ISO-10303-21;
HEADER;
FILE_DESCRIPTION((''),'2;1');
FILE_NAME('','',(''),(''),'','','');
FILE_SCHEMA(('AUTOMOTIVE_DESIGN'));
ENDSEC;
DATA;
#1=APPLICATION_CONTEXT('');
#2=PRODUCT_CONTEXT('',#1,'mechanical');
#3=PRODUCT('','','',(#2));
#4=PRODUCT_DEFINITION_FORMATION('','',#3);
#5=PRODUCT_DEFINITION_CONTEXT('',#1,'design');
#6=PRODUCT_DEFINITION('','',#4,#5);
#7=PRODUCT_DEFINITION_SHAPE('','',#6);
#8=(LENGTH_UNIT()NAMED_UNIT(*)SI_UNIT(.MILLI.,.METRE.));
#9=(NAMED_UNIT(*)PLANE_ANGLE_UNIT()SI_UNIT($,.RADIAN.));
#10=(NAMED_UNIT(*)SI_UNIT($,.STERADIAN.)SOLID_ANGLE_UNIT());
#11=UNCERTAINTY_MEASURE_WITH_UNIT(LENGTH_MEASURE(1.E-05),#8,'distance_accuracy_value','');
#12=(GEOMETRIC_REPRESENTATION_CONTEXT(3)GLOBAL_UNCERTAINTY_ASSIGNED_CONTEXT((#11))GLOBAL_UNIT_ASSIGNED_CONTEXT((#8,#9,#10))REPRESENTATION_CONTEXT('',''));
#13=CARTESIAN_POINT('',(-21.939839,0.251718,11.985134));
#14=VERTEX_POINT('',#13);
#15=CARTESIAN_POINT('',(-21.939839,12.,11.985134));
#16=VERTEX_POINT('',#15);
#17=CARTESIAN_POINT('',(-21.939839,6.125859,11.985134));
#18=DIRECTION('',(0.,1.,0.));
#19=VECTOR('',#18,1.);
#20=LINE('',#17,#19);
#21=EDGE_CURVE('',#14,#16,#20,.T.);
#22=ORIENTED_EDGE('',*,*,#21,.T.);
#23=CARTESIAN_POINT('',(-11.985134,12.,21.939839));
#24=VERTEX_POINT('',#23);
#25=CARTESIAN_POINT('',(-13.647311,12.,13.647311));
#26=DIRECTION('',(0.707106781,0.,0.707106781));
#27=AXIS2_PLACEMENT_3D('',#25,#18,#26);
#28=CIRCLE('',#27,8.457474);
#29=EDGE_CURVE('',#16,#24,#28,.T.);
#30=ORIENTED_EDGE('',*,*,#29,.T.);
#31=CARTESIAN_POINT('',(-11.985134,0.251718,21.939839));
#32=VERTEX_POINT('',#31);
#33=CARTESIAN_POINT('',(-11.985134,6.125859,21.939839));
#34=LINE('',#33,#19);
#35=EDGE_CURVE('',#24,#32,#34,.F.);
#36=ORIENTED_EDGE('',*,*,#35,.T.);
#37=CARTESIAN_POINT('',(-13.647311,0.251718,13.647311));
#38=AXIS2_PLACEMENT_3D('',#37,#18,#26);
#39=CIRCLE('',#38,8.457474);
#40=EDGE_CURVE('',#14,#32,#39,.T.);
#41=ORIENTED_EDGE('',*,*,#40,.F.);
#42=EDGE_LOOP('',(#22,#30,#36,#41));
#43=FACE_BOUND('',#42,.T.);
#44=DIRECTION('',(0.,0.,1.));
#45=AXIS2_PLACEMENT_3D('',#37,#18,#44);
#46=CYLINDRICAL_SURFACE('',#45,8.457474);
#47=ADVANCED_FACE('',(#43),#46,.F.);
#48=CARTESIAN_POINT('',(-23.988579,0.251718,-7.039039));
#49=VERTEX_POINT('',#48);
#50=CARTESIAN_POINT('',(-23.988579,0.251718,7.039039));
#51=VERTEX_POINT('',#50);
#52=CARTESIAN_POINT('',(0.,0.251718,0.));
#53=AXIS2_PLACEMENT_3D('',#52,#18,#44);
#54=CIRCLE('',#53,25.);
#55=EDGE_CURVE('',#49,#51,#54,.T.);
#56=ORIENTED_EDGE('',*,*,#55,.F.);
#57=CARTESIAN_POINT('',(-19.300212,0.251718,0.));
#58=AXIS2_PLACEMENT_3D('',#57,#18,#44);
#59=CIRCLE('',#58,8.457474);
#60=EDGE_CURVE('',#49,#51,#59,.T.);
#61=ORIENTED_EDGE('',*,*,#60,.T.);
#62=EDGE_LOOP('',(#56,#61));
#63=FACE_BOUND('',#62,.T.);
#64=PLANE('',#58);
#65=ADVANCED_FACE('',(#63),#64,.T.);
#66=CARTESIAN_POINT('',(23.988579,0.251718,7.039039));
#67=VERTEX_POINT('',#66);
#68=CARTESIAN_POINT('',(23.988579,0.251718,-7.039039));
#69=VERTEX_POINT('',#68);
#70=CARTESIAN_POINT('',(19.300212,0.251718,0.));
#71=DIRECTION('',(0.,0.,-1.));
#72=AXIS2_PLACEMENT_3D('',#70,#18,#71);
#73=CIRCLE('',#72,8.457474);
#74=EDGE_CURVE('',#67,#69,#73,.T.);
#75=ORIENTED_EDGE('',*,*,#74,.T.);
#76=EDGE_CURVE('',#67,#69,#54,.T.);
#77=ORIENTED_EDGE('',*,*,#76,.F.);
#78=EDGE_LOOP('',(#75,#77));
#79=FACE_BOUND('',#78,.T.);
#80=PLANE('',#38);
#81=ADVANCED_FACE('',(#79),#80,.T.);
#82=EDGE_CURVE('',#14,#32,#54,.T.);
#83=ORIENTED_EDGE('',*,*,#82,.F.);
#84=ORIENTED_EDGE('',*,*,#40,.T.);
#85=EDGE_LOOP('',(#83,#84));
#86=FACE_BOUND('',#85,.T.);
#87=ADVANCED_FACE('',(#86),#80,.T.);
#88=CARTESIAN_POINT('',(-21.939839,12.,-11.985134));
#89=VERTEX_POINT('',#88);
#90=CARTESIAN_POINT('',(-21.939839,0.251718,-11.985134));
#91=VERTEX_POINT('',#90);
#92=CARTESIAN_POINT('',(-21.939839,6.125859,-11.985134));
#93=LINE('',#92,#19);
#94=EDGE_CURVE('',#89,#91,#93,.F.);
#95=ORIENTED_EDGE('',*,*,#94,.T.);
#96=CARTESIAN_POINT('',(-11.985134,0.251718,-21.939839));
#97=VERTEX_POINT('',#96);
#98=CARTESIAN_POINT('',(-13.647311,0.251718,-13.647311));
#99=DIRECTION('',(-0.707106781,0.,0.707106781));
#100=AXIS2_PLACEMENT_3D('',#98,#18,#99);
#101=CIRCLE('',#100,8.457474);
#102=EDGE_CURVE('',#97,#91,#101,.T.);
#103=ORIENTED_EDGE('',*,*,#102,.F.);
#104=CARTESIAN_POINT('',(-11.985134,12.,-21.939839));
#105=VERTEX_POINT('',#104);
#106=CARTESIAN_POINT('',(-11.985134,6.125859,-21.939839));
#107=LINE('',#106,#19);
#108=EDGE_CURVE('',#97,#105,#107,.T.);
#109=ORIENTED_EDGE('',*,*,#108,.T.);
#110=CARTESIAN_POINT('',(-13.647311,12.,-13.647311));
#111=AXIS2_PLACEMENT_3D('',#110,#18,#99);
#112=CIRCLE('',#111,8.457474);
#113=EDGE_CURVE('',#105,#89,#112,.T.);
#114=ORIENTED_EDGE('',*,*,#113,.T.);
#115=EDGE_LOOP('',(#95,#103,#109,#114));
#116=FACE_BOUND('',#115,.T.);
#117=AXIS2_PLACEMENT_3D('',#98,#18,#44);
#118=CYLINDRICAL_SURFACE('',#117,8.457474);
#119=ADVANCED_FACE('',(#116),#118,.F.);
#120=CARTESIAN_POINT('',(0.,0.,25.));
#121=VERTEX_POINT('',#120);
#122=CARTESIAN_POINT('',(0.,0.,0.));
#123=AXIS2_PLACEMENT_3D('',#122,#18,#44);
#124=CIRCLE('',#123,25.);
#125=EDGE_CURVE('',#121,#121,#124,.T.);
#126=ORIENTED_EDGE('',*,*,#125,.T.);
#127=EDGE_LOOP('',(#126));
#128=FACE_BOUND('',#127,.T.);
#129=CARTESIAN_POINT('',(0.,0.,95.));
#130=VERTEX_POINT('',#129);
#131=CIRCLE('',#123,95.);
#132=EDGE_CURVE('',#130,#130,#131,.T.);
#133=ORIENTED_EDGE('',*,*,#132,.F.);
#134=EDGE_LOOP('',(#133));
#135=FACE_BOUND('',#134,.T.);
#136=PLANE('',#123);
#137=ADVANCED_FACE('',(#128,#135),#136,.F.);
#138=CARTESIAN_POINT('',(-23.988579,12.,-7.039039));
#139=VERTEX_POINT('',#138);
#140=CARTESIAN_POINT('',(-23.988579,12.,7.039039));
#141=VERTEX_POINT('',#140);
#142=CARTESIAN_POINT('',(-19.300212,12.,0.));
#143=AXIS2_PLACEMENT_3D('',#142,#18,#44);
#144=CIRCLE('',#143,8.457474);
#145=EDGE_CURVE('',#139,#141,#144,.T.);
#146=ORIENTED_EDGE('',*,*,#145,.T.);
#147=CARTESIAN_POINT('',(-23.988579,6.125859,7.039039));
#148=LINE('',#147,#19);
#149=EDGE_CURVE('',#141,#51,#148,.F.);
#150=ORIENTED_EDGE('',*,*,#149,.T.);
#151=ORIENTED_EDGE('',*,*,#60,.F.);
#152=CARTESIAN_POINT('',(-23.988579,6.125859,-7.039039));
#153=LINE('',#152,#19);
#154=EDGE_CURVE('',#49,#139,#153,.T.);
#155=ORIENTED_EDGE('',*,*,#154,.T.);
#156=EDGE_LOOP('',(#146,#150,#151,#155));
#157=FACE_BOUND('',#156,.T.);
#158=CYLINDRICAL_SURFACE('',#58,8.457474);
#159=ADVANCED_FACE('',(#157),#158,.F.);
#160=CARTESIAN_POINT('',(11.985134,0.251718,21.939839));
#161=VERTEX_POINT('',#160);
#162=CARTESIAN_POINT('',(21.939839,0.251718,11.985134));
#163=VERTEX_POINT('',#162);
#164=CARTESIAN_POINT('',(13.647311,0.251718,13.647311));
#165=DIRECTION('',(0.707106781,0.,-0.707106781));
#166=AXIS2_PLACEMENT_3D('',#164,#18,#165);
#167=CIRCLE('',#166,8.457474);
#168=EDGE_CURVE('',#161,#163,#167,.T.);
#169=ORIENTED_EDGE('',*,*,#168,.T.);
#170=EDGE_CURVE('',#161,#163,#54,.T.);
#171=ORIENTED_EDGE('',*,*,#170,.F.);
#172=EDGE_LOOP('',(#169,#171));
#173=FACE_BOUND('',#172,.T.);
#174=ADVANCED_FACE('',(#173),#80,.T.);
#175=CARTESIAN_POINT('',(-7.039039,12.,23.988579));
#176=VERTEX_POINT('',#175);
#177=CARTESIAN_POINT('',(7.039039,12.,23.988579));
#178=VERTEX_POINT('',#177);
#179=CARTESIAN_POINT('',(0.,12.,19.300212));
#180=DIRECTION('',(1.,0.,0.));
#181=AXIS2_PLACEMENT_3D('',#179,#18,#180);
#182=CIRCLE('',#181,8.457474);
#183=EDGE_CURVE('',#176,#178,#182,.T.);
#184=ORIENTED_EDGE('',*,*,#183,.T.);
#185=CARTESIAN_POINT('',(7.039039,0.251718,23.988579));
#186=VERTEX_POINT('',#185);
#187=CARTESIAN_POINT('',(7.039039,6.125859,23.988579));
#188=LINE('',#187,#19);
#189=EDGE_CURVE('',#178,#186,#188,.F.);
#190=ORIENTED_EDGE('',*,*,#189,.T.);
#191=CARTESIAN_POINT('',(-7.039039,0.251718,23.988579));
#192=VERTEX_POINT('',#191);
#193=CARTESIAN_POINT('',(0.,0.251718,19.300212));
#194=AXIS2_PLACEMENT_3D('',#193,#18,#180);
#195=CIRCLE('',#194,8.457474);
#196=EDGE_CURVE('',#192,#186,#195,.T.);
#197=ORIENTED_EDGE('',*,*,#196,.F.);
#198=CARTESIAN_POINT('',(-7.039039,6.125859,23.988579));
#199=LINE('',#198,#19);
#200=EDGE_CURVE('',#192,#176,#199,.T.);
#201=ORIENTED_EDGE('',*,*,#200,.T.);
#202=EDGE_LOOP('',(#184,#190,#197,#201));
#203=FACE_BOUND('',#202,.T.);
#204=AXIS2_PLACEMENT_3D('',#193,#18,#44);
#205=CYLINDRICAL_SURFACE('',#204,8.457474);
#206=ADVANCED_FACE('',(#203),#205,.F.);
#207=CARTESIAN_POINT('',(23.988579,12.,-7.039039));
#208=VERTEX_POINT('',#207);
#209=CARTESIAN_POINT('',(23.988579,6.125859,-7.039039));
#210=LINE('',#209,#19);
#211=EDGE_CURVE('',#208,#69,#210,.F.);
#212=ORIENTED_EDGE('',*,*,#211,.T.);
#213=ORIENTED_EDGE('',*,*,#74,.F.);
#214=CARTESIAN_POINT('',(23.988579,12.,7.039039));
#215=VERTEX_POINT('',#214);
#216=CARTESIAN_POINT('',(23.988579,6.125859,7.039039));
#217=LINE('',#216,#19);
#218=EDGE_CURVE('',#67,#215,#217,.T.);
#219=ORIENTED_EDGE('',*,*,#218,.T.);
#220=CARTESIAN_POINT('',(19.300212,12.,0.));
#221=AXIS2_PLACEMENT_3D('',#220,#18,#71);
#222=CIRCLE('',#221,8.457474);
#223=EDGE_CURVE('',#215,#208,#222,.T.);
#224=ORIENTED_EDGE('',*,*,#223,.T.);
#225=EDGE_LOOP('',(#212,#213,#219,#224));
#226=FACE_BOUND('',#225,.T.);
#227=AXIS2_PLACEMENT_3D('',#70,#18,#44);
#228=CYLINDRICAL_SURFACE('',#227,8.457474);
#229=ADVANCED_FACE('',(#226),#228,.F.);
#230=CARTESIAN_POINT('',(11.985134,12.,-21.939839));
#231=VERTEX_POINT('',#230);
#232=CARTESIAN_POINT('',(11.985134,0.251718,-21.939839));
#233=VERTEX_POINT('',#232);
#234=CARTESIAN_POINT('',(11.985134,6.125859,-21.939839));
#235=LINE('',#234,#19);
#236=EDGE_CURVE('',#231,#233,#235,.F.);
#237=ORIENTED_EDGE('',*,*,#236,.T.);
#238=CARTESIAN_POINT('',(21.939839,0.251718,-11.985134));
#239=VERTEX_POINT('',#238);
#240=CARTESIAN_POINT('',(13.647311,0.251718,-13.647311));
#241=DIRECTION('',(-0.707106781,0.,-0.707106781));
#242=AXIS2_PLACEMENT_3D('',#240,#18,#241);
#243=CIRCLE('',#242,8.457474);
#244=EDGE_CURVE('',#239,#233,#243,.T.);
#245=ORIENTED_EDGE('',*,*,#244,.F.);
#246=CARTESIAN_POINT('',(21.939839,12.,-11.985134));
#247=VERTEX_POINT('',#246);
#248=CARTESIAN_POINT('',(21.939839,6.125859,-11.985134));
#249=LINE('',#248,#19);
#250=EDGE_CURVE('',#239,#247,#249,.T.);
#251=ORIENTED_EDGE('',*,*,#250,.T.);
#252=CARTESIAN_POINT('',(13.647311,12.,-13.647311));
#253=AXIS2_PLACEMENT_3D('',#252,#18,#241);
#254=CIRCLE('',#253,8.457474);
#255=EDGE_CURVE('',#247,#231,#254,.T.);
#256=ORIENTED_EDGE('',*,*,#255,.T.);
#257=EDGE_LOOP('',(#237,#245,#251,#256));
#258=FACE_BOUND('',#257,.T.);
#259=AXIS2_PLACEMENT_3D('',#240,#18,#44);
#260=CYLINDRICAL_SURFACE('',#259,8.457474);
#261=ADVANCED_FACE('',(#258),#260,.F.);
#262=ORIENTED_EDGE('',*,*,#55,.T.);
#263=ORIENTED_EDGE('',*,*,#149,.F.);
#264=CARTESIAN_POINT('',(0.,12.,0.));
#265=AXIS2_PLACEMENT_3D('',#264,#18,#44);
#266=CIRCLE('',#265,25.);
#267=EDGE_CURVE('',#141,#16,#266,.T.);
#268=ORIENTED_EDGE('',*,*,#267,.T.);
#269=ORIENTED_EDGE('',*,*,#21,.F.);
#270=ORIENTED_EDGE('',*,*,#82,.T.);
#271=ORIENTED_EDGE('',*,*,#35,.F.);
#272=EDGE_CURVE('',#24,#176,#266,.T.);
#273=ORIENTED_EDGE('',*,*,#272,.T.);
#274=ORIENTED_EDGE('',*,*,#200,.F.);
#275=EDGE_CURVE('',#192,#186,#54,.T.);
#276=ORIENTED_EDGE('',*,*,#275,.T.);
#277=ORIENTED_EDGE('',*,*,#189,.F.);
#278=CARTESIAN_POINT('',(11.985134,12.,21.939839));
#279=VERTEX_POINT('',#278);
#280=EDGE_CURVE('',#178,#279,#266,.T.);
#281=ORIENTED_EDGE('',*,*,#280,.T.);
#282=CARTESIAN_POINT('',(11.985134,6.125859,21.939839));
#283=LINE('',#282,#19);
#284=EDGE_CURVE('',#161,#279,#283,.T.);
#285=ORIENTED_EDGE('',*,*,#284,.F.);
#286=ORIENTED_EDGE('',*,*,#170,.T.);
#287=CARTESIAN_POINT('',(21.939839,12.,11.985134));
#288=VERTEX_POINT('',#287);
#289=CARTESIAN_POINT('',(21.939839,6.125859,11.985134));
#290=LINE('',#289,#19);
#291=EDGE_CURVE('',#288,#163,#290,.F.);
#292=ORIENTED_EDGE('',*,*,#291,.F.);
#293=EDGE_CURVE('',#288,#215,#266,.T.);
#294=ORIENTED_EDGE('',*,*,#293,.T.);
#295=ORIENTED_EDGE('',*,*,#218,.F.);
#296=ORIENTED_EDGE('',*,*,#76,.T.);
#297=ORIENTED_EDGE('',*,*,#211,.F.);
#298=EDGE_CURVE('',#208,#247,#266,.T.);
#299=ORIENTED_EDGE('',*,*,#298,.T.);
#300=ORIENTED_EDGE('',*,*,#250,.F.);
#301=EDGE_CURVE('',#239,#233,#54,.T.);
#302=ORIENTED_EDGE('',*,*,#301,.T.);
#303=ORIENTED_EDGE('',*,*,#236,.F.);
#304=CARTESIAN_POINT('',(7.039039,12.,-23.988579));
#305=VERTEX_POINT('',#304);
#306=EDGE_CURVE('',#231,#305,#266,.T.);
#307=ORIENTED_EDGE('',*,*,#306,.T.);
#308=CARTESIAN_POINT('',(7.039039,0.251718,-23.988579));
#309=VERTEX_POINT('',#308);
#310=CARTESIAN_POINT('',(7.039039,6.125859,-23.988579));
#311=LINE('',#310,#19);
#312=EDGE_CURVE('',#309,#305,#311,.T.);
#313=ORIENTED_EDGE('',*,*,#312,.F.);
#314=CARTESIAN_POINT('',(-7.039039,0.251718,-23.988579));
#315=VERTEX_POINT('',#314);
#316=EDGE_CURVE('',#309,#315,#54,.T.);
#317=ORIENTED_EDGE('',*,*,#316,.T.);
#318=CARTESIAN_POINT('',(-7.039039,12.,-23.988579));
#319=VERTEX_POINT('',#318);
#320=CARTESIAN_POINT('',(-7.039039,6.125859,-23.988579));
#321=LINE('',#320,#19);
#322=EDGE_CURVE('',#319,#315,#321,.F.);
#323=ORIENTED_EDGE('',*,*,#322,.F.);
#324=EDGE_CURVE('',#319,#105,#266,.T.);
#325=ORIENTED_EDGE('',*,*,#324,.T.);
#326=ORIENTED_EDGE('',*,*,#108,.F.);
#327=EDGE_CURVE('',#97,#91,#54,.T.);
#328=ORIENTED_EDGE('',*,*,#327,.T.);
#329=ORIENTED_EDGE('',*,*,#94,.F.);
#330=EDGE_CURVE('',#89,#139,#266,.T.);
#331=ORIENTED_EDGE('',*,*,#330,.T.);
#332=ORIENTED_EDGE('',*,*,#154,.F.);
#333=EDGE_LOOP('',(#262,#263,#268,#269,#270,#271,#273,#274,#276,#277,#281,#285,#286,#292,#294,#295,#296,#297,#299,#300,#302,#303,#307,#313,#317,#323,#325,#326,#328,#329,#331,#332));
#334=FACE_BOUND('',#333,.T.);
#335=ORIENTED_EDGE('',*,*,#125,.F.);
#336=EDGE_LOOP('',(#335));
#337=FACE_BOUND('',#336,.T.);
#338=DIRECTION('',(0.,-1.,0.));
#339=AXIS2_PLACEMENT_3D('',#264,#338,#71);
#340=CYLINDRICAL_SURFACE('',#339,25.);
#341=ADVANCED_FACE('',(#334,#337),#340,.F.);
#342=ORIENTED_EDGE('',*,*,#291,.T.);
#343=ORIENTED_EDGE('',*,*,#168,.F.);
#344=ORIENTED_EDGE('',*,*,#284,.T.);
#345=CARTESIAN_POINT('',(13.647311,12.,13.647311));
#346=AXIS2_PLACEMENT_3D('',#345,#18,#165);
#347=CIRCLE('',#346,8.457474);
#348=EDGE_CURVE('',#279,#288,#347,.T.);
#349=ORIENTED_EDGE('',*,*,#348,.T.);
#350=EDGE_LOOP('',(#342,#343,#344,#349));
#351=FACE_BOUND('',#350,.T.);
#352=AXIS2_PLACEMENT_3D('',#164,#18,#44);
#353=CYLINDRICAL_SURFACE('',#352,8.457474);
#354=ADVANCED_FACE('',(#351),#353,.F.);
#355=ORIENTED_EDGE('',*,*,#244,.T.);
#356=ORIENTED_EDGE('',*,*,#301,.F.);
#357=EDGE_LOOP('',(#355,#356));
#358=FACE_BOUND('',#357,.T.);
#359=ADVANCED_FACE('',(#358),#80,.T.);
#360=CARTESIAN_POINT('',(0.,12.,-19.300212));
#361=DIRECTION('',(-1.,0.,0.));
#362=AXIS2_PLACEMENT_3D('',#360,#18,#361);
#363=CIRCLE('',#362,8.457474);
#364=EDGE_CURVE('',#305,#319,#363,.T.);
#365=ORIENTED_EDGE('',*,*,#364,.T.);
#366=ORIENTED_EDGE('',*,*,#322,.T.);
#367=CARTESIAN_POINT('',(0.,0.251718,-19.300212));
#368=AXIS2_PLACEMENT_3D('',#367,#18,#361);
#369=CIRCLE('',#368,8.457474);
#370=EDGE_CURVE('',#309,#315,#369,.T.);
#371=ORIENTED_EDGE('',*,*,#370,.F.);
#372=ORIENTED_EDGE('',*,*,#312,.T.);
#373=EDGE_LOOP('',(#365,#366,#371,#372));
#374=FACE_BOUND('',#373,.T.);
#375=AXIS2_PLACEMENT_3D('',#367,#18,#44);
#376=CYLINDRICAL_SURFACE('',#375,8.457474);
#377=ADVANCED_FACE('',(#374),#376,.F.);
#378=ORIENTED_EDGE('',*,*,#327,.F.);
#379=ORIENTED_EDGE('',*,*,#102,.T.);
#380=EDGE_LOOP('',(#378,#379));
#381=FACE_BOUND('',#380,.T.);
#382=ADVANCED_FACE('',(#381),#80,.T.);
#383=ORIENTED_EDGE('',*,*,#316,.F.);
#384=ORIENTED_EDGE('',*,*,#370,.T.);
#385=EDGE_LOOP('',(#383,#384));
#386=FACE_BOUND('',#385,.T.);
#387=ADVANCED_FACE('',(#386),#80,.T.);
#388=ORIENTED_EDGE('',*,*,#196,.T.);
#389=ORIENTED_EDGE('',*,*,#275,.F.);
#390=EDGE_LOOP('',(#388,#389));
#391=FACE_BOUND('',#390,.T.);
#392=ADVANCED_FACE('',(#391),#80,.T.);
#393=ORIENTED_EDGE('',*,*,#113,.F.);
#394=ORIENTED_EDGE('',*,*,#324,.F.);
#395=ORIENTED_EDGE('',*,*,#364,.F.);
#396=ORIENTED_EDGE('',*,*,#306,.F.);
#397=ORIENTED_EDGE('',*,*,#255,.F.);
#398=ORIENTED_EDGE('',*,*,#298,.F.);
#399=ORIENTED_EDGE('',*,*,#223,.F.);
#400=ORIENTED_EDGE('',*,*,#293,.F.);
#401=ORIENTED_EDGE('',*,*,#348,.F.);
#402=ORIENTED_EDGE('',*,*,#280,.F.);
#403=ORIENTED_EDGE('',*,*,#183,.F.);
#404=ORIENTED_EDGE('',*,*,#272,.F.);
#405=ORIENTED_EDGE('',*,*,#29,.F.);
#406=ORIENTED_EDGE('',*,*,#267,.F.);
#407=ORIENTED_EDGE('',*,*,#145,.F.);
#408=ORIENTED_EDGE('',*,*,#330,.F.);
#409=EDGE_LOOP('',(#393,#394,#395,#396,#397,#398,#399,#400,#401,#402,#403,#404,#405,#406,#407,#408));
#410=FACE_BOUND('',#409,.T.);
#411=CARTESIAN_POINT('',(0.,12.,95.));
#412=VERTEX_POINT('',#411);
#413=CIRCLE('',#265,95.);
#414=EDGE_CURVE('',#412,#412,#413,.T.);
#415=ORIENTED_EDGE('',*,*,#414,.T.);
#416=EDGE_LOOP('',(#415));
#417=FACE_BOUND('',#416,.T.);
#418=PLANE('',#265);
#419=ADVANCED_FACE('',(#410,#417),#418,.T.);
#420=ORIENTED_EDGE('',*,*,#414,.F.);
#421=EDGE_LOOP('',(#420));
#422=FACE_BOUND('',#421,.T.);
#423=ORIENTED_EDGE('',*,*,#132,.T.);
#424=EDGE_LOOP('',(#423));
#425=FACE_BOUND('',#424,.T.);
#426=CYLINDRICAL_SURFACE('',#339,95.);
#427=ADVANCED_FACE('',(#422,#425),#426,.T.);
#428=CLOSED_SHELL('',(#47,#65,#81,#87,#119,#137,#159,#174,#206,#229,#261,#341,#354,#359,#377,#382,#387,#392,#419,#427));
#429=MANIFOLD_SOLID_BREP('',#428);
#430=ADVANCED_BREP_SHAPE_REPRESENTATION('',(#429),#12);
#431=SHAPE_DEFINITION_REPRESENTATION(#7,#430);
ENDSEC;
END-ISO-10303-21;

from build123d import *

# Parameters (mm, degrees)
SKETCH1_R           = 95
BOSS_EXTRUDE1_DEPTH = 12
SKETCH2_R           = 25
CUT_EXTRUDE1_DEPTH  = 135.88513632
SKETCH3_R           = 8.457473765
CUT_EXTRUDE2_DEPTH  = 11.748282376
CIRPATTERN1_COUNT   = 8


with BuildPart() as part:
    # Sketch1 → Boss-Extrude1 (new body)
    with BuildSketch(Plane(origin=(0, 0, 0), x_dir=(1, 0, 0), z_dir=(0, 1, 0))):
        Circle(SKETCH1_R)
    extrude(amount=BOSS_EXTRUDE1_DEPTH)

    # Sketch2 → Cut-Extrude1 (cut, through all)
    with BuildSketch(Plane(origin=(0, 0, 0), x_dir=(1, 0, 0), z_dir=(0, 1, 0))):
        Circle(SKETCH2_R)
    extrude(amount=CUT_EXTRUDE1_DEPTH, mode=Mode.SUBTRACT)

    # Sketch3 → Cut-Extrude2 (cut)
    with BuildSketch(Plane(origin=(0, 12, 0), x_dir=(1, 0, 0), z_dir=(0, 1, 0))):
        with Locations((-19.300211782, 0)):
            Circle(SKETCH3_R)
    cut_extrude2 = extrude(amount=-CUT_EXTRUDE2_DEPTH, mode=Mode.SUBTRACT)

    # CirPattern1: Cut-Extrude2 ×8 about axis
    cirpattern1_axis = Axis((0, 0, 0), (0, 1, 0))
    for i in range(1, CIRPATTERN1_COUNT):
        add(cut_extrude2.rotate(cirpattern1_axis, i * 360 / CIRPATTERN1_COUNT), mode=Mode.SUBTRACT)


solid = part.part
